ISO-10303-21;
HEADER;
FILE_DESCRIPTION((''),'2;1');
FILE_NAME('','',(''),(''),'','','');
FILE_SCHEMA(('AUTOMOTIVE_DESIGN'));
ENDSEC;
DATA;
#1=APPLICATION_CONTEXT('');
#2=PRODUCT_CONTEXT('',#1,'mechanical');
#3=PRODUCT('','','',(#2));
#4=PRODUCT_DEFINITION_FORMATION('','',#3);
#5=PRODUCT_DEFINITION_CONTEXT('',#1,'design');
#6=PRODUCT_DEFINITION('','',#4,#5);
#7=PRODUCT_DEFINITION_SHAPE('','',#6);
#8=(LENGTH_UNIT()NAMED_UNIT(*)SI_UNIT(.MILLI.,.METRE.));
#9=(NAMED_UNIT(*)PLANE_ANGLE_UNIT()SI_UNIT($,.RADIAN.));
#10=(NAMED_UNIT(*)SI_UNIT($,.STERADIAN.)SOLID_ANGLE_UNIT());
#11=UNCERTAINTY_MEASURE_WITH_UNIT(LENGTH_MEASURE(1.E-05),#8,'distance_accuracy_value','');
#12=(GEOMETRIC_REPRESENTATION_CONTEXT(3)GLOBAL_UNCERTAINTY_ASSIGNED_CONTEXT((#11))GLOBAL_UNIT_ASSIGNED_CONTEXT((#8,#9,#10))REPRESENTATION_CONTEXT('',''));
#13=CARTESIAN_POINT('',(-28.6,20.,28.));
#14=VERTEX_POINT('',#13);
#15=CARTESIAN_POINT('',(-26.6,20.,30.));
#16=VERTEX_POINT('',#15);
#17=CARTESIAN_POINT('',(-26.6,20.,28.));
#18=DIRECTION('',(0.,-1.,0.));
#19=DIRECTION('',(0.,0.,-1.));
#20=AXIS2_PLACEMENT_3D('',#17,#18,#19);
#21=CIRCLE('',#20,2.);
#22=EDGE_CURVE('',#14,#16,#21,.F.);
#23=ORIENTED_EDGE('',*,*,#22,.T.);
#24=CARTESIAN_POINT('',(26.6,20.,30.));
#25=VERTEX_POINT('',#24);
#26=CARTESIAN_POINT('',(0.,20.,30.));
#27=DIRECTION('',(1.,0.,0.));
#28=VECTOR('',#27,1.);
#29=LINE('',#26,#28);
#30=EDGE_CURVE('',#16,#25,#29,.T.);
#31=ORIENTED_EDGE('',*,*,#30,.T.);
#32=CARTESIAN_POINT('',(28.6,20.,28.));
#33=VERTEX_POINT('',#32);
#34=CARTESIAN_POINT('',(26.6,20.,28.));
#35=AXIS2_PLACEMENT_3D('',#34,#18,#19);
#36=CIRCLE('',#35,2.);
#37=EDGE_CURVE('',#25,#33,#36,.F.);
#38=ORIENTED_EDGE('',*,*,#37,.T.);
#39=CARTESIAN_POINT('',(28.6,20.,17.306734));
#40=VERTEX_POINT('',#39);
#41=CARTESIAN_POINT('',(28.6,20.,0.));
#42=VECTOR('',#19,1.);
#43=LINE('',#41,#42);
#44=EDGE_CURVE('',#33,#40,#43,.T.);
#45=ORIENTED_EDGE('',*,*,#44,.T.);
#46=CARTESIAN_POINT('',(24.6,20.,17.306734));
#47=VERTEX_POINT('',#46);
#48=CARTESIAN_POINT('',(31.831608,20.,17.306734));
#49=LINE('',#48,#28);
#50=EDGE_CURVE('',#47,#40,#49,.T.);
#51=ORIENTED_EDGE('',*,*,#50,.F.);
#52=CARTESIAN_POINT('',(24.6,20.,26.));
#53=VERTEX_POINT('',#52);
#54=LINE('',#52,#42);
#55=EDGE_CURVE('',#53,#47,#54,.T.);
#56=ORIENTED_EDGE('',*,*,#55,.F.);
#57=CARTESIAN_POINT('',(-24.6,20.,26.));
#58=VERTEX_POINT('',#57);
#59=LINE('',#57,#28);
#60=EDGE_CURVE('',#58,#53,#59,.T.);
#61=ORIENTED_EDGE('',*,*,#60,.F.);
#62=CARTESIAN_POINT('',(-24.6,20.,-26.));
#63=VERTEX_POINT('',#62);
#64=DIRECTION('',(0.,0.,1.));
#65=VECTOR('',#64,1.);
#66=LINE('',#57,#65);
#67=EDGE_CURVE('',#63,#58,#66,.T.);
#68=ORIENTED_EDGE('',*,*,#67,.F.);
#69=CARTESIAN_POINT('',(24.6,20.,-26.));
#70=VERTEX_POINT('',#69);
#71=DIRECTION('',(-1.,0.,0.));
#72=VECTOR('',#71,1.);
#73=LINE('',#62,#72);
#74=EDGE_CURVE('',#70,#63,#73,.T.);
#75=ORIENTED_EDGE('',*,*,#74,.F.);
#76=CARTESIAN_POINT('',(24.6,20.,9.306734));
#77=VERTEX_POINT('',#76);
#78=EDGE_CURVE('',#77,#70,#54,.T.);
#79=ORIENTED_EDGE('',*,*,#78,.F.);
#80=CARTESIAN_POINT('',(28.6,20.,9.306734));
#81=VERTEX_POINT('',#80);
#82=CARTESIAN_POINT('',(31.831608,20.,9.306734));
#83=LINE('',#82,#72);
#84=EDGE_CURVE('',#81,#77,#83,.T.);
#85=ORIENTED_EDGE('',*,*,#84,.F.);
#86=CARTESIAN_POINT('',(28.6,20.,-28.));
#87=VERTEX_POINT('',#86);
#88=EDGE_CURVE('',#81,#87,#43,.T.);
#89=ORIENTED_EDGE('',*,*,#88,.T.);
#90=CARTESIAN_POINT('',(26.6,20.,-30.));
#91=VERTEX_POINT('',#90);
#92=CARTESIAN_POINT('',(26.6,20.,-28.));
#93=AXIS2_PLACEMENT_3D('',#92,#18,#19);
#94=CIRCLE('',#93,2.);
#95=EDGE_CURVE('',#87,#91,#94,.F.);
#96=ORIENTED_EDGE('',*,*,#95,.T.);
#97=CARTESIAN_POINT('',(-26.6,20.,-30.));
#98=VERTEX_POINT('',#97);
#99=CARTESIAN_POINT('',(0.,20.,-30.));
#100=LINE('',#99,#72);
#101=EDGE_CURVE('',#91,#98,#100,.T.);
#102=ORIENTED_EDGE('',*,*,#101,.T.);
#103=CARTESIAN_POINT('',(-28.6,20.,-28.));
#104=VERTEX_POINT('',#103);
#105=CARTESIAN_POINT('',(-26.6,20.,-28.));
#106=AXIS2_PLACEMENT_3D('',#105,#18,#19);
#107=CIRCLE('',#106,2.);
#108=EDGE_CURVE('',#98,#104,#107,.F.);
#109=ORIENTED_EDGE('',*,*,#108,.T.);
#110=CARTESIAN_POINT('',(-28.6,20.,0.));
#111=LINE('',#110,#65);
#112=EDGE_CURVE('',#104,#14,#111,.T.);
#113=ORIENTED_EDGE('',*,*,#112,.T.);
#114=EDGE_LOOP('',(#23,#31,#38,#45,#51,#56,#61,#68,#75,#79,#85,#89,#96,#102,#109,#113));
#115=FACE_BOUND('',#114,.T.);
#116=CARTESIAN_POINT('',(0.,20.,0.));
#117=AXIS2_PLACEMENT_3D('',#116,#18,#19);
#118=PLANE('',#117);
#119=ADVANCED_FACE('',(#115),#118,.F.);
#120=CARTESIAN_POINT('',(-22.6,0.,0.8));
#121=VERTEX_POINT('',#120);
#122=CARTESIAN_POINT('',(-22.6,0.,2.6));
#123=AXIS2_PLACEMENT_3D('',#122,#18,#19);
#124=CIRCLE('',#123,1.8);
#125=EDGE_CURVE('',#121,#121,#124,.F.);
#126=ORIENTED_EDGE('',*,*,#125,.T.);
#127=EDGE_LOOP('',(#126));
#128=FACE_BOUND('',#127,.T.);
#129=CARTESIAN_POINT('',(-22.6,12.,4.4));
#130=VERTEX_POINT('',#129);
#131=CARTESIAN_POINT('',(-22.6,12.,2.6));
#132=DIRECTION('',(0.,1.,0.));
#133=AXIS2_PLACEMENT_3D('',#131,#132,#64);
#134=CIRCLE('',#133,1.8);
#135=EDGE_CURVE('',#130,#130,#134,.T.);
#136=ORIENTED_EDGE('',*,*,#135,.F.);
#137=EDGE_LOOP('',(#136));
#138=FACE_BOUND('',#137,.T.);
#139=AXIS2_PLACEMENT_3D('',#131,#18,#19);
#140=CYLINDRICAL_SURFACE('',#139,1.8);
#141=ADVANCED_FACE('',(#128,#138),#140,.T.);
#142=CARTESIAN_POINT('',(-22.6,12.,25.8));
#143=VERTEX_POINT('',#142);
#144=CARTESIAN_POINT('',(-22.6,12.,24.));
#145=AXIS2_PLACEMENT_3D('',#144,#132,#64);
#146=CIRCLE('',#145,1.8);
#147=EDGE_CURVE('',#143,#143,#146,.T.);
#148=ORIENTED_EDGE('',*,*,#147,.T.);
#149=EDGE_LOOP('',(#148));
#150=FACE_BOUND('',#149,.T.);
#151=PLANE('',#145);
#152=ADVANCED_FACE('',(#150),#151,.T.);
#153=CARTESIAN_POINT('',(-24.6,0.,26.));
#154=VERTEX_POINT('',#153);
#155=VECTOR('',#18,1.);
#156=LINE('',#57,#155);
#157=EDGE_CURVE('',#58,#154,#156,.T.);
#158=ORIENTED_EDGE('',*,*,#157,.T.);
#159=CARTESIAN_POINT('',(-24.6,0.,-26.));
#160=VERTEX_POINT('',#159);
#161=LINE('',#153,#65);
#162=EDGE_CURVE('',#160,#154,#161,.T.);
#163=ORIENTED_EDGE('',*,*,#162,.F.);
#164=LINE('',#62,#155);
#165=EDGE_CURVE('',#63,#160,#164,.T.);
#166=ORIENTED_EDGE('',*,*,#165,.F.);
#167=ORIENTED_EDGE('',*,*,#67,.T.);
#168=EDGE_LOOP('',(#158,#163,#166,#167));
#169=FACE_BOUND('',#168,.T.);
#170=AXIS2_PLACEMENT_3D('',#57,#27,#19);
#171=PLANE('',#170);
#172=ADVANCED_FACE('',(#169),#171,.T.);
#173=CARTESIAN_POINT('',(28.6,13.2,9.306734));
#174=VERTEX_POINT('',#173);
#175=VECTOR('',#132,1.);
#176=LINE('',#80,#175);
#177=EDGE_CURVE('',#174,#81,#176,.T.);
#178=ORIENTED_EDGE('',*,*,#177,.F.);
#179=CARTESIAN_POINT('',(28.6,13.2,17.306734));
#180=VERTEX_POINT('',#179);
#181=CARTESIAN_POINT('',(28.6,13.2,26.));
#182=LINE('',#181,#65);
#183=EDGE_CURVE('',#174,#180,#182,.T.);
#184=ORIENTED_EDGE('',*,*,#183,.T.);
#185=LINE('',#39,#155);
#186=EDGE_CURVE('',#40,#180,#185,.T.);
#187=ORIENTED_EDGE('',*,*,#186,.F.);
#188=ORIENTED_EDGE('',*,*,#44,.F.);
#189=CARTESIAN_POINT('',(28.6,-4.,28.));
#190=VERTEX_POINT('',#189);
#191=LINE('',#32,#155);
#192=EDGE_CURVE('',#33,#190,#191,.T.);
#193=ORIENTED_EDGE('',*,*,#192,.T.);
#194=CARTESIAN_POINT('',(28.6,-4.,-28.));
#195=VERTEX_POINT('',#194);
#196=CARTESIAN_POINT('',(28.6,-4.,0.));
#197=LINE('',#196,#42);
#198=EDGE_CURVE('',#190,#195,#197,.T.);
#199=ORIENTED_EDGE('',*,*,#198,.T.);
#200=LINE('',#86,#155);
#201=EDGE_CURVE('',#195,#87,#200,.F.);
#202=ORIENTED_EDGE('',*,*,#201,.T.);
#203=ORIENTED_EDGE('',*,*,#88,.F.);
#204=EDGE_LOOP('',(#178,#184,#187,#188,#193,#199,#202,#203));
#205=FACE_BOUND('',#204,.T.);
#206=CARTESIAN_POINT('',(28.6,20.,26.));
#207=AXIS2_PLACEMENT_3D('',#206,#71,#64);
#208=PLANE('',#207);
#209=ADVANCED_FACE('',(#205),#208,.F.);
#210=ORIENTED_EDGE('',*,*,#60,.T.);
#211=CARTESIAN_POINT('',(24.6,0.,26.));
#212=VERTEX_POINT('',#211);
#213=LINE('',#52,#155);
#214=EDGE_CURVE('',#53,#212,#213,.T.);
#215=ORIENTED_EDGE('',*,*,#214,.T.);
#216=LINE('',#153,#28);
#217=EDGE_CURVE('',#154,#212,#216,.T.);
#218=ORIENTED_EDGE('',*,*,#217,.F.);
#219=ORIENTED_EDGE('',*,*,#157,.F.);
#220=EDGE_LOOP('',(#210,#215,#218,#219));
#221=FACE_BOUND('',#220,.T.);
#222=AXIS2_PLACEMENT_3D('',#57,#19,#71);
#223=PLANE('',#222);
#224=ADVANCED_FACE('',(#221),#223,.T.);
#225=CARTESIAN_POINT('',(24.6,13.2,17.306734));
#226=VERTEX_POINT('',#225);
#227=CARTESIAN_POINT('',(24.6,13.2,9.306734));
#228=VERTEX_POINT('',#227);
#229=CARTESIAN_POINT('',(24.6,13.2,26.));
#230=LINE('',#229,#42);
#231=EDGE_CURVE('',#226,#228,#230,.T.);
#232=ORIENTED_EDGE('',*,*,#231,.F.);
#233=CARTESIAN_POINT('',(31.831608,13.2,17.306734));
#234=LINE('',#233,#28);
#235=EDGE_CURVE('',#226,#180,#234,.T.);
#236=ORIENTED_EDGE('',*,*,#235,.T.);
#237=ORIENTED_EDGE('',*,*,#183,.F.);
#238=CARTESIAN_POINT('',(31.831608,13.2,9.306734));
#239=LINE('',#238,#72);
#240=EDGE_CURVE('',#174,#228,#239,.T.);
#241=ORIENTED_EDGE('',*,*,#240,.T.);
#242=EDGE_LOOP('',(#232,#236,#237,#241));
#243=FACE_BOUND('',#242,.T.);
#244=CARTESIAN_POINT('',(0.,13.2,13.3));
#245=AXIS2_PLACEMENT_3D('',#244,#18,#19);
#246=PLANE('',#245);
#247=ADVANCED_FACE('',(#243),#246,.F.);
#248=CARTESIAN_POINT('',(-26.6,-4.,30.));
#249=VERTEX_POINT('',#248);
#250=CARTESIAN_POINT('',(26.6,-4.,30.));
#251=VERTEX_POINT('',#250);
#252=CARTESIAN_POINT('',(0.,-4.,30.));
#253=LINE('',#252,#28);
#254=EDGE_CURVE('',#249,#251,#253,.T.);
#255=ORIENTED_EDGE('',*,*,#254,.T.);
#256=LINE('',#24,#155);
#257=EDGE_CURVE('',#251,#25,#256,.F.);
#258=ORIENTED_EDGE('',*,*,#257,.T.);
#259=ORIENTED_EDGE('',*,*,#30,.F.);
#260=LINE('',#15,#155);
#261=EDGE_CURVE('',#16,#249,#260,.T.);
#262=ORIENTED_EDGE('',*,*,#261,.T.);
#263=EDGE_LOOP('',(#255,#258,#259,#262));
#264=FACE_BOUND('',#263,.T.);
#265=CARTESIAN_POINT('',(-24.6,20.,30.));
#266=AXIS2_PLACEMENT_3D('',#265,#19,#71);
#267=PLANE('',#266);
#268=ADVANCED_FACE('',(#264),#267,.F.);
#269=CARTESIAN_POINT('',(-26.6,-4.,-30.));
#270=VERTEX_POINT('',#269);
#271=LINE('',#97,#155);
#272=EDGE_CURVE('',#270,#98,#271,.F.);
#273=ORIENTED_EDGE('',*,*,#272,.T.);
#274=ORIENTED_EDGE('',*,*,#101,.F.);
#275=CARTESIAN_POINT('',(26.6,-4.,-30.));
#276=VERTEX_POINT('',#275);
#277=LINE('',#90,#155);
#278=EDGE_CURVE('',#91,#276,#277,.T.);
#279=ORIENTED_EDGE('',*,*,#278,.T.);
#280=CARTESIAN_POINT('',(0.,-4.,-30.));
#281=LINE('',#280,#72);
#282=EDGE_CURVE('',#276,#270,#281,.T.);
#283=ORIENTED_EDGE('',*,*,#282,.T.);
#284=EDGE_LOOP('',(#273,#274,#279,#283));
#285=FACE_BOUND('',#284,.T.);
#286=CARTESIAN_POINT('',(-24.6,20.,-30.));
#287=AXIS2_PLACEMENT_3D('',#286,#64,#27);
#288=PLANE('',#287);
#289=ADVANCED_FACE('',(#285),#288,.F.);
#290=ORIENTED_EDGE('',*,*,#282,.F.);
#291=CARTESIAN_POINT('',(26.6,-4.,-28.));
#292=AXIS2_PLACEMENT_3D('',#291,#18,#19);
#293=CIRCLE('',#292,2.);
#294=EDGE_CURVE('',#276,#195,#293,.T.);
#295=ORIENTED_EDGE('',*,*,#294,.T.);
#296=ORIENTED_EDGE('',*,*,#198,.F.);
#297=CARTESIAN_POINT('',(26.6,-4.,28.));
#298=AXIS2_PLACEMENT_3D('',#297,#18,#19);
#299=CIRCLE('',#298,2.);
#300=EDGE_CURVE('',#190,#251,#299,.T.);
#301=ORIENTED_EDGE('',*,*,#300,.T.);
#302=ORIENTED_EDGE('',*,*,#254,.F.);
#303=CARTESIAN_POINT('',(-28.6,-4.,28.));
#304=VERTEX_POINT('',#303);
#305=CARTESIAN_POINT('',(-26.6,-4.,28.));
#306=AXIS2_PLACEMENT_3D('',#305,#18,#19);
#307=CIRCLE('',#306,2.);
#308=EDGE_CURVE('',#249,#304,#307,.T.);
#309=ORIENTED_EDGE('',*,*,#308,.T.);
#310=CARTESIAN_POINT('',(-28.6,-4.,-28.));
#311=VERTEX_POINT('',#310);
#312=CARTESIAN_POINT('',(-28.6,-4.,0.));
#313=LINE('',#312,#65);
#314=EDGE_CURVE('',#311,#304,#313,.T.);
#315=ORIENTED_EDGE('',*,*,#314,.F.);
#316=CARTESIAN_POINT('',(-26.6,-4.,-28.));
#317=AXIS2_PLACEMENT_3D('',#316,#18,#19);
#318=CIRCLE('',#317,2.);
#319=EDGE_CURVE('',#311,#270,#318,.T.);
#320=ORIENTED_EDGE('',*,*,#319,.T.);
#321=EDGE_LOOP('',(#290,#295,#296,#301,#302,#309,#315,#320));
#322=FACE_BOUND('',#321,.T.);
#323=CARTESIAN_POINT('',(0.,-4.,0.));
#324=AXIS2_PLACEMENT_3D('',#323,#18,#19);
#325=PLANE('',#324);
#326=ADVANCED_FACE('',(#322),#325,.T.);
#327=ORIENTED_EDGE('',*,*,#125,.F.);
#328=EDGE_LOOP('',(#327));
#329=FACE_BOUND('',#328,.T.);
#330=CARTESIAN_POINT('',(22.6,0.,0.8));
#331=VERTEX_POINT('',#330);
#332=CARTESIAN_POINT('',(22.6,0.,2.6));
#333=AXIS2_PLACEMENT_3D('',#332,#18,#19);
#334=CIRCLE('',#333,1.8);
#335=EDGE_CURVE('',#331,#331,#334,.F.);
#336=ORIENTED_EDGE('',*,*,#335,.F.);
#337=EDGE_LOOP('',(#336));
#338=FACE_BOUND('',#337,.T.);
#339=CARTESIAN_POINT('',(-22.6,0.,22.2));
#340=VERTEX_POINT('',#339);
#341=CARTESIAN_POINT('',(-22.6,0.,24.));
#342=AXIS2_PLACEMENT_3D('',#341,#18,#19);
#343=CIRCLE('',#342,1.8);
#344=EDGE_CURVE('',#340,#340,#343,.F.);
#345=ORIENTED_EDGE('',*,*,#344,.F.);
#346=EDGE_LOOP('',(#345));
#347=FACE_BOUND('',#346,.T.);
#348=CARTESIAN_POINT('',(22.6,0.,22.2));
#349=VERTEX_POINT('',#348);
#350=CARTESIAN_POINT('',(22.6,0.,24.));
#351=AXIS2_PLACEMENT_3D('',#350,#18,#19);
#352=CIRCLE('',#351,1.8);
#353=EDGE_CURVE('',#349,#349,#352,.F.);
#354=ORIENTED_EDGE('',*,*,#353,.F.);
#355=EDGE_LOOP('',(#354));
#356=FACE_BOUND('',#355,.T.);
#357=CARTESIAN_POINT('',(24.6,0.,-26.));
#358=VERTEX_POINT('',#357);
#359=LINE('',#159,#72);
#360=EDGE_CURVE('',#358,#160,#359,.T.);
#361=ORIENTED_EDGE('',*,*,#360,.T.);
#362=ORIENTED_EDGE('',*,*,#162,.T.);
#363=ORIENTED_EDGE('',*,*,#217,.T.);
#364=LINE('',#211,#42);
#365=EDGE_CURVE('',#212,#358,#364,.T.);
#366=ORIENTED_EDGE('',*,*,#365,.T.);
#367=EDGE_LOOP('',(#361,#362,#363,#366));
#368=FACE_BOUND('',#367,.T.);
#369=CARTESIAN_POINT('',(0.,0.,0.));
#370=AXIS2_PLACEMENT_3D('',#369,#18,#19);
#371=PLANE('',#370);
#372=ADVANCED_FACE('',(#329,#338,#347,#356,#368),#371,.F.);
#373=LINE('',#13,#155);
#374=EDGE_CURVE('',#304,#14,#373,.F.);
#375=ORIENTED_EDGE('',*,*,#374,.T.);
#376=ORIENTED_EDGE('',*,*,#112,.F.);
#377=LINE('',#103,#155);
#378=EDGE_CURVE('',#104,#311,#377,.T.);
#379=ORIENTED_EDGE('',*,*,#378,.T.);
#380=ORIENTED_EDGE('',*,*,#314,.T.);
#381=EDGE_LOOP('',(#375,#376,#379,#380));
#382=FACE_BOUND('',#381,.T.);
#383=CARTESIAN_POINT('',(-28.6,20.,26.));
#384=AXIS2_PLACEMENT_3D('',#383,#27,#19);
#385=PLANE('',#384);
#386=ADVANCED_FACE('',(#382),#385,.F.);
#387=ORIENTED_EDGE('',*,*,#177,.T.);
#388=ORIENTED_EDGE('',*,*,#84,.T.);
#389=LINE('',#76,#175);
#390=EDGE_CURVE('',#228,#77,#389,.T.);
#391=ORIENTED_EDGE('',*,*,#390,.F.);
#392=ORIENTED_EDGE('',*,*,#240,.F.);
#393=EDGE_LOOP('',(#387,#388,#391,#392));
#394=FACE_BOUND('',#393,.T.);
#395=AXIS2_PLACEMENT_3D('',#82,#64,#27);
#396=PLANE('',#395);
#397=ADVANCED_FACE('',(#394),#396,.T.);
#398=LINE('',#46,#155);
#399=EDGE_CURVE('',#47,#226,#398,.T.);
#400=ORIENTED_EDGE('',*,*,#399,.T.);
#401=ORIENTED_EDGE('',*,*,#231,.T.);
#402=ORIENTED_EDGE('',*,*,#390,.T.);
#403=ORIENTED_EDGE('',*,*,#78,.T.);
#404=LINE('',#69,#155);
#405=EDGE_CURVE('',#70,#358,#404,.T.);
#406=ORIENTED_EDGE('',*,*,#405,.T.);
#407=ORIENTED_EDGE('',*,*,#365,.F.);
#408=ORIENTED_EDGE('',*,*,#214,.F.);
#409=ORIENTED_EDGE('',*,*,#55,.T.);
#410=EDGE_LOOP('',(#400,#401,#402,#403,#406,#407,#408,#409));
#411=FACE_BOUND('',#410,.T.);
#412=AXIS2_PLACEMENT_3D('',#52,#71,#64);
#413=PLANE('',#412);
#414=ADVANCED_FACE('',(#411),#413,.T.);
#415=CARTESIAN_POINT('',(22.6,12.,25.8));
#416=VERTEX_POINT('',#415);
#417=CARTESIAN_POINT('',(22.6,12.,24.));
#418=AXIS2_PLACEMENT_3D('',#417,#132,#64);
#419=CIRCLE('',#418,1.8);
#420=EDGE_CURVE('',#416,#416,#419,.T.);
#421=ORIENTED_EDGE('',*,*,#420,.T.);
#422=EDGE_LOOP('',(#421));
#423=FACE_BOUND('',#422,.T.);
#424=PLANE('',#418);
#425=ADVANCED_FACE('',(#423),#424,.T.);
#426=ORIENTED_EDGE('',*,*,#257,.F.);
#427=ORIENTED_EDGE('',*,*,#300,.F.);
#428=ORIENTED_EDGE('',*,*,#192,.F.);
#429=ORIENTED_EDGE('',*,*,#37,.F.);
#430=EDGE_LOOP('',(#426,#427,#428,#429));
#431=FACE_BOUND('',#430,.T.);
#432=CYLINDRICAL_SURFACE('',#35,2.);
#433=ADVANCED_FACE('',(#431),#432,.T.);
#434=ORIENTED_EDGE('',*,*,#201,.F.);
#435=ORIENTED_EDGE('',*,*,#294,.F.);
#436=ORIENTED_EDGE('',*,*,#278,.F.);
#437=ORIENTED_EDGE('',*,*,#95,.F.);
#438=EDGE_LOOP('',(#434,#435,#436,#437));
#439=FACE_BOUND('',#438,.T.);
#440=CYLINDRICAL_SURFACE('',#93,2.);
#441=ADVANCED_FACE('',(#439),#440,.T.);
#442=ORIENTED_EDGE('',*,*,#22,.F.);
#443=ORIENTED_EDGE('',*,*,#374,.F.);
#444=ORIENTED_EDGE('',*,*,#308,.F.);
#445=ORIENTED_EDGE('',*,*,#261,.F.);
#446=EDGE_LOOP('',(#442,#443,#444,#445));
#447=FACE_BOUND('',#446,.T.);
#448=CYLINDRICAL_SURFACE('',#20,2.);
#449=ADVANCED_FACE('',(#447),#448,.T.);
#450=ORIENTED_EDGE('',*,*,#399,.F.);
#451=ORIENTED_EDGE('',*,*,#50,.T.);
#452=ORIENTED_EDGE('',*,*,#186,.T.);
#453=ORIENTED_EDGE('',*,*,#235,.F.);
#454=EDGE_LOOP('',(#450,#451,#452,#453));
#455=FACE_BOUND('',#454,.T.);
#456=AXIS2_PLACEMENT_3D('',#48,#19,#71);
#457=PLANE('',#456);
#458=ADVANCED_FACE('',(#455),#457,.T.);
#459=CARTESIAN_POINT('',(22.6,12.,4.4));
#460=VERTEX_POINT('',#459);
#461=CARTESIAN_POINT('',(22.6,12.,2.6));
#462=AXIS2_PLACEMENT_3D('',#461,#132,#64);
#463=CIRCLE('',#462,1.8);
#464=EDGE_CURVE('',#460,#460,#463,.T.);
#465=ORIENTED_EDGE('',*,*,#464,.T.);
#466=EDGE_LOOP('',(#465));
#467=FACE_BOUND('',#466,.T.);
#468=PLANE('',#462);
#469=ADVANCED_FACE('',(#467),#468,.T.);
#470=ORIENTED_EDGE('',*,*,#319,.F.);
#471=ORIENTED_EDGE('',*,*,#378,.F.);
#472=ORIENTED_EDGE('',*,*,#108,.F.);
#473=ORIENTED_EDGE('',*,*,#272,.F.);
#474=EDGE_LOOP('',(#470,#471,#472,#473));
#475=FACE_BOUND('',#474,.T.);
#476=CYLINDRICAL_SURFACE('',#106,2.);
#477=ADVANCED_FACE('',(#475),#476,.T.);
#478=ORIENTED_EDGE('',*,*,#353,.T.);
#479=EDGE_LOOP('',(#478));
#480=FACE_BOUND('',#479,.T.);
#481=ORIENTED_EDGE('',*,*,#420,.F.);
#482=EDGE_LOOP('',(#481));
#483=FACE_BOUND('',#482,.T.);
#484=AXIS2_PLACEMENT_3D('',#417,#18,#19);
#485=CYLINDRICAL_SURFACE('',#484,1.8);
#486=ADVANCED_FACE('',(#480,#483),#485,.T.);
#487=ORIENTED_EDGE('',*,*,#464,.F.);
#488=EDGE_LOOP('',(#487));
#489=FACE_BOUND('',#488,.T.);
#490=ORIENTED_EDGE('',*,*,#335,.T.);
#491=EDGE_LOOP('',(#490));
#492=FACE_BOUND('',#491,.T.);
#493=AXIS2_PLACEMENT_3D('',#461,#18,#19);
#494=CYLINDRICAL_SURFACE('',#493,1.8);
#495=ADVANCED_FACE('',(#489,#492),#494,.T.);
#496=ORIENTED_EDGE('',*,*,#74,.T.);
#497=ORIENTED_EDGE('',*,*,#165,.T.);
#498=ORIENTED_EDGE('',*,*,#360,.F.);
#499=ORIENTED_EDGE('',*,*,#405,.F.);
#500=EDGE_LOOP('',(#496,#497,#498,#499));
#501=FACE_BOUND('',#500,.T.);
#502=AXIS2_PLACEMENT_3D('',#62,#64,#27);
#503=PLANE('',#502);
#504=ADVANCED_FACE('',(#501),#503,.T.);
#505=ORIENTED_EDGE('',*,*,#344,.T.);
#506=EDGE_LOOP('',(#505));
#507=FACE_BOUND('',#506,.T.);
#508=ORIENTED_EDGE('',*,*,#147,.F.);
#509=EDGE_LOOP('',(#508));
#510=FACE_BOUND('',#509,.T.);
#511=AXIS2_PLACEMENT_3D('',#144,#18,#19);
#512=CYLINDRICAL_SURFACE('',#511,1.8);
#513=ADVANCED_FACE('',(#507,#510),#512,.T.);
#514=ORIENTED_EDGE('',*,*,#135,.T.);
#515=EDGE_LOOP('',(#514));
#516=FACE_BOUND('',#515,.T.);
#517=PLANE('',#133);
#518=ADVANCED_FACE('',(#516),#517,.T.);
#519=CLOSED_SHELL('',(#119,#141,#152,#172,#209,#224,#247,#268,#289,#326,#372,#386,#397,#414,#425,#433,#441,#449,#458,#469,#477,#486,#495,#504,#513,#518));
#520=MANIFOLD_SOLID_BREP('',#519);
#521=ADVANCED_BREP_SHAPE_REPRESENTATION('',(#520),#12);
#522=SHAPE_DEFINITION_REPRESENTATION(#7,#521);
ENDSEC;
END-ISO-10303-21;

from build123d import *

# Parameters (mm, degrees)
ESQUISSE1_W          = 49.2
ESQUISSE1_H          = 52
BOSS_EXTRU_1_DEPTH   = 20
COQUE1_T             = 4
CONG_1_R             = 2
CONG_2_R             = 2
CONG_3_R             = 2
CONG_4_R             = 2
ESQUISSE5_R          = 1.8
BOSS_EXTRU_2_DEPTH   = 12
EMPREINTE1_START     = 9.306734089
EMPREINTE1_OUTLINE_W = 4
EMPREINTE1_OUTLINE_H = 6.8
EMPREINTE1_DEPTH     = 8


# Read off the part's stored shape, not the designer's step: Empreinte1
with BuildPart() as part:
    # Esquisse1 → Boss.-Extru.1 (new body)
    with BuildSketch(Plane(origin=(0, 0, 0), x_dir=(1, 0, 0), z_dir=(0, 1, 0))):
        Rectangle(ESQUISSE1_W, ESQUISSE1_H)
    extrude(amount=BOSS_EXTRU_1_DEPTH)

    # Coque1
    coque1_openings = [part.faces().sort_by_distance(p)[0] for p in [
        (0, 20, 0),
    ]]
    offset(amount=COQUE1_T, openings=coque1_openings, kind=Kind.INTERSECTION)

    # Congé1
    # the kernel refuses this fillet: 2 mm, written as the material it takes off along each edge
    with BuildSketch(Plane(origin=(28.6, -9, 30), x_dir=(-1, 0, 0), z_dir=(0, 1, 0))) as cong_1_piece_1:
        with BuildLine():
            CenterArc((CONG_1_R, -CONG_1_R), CONG_1_R, 90, 90)
            Line((0, -CONG_1_R), (0, 0))
            Line((0, 0), (CONG_1_R, 0))
        make_face()
    extrude(amount=34, mode=Mode.SUBTRACT)

    # Congé2
    cong_2_edges = [part.edges().sort_by_distance(p)[0] for p in [
        (28.6, 8, -30),
    ]]
    fillet(cong_2_edges, radius=CONG_2_R)

    # Congé3
    cong_3_edges = [part.edges().sort_by_distance(p)[0] for p in [
        (-28.6, 8, -30),
    ]]
    fillet(cong_3_edges, radius=CONG_3_R)

    # Congé4
    cong_4_edges = [part.edges().sort_by_distance(p)[0] for p in [
        (-28.6, 8, 30),
    ]]
    fillet(cong_4_edges, radius=CONG_4_R)

    # Esquisse5 → Boss.-Extru.2 (add)
    with BuildSketch(Plane(origin=(0, 0, 0), x_dir=(1, 0, 0), z_dir=(0, 1, 0))):
        with Locations(Location((-22.6, -2.6, 0), (0, 0, 90))):
            Circle(ESQUISSE5_R)
        with Locations(Location((22.6, -2.6, 0), (0, 0, 90))):
            Circle(ESQUISSE5_R)
        with Locations(Location((-22.6, -24, 0), (0, 0, 90))):
            Circle(ESQUISSE5_R)
        with Locations(Location((22.6, -24, 0), (0, 0, 90))):
            Circle(ESQUISSE5_R)
    extrude(amount=BOSS_EXTRU_2_DEPTH)

    # Empreinte1 outline → Empreinte1 (cut)
    with BuildSketch(Plane.XY.offset(EMPREINTE1_START)):
        with Locations((26.6, 16.6)):
            Rectangle(EMPREINTE1_OUTLINE_W, EMPREINTE1_OUTLINE_H)
    extrude(amount=EMPREINTE1_DEPTH, mode=Mode.SUBTRACT)


solid = part.part
